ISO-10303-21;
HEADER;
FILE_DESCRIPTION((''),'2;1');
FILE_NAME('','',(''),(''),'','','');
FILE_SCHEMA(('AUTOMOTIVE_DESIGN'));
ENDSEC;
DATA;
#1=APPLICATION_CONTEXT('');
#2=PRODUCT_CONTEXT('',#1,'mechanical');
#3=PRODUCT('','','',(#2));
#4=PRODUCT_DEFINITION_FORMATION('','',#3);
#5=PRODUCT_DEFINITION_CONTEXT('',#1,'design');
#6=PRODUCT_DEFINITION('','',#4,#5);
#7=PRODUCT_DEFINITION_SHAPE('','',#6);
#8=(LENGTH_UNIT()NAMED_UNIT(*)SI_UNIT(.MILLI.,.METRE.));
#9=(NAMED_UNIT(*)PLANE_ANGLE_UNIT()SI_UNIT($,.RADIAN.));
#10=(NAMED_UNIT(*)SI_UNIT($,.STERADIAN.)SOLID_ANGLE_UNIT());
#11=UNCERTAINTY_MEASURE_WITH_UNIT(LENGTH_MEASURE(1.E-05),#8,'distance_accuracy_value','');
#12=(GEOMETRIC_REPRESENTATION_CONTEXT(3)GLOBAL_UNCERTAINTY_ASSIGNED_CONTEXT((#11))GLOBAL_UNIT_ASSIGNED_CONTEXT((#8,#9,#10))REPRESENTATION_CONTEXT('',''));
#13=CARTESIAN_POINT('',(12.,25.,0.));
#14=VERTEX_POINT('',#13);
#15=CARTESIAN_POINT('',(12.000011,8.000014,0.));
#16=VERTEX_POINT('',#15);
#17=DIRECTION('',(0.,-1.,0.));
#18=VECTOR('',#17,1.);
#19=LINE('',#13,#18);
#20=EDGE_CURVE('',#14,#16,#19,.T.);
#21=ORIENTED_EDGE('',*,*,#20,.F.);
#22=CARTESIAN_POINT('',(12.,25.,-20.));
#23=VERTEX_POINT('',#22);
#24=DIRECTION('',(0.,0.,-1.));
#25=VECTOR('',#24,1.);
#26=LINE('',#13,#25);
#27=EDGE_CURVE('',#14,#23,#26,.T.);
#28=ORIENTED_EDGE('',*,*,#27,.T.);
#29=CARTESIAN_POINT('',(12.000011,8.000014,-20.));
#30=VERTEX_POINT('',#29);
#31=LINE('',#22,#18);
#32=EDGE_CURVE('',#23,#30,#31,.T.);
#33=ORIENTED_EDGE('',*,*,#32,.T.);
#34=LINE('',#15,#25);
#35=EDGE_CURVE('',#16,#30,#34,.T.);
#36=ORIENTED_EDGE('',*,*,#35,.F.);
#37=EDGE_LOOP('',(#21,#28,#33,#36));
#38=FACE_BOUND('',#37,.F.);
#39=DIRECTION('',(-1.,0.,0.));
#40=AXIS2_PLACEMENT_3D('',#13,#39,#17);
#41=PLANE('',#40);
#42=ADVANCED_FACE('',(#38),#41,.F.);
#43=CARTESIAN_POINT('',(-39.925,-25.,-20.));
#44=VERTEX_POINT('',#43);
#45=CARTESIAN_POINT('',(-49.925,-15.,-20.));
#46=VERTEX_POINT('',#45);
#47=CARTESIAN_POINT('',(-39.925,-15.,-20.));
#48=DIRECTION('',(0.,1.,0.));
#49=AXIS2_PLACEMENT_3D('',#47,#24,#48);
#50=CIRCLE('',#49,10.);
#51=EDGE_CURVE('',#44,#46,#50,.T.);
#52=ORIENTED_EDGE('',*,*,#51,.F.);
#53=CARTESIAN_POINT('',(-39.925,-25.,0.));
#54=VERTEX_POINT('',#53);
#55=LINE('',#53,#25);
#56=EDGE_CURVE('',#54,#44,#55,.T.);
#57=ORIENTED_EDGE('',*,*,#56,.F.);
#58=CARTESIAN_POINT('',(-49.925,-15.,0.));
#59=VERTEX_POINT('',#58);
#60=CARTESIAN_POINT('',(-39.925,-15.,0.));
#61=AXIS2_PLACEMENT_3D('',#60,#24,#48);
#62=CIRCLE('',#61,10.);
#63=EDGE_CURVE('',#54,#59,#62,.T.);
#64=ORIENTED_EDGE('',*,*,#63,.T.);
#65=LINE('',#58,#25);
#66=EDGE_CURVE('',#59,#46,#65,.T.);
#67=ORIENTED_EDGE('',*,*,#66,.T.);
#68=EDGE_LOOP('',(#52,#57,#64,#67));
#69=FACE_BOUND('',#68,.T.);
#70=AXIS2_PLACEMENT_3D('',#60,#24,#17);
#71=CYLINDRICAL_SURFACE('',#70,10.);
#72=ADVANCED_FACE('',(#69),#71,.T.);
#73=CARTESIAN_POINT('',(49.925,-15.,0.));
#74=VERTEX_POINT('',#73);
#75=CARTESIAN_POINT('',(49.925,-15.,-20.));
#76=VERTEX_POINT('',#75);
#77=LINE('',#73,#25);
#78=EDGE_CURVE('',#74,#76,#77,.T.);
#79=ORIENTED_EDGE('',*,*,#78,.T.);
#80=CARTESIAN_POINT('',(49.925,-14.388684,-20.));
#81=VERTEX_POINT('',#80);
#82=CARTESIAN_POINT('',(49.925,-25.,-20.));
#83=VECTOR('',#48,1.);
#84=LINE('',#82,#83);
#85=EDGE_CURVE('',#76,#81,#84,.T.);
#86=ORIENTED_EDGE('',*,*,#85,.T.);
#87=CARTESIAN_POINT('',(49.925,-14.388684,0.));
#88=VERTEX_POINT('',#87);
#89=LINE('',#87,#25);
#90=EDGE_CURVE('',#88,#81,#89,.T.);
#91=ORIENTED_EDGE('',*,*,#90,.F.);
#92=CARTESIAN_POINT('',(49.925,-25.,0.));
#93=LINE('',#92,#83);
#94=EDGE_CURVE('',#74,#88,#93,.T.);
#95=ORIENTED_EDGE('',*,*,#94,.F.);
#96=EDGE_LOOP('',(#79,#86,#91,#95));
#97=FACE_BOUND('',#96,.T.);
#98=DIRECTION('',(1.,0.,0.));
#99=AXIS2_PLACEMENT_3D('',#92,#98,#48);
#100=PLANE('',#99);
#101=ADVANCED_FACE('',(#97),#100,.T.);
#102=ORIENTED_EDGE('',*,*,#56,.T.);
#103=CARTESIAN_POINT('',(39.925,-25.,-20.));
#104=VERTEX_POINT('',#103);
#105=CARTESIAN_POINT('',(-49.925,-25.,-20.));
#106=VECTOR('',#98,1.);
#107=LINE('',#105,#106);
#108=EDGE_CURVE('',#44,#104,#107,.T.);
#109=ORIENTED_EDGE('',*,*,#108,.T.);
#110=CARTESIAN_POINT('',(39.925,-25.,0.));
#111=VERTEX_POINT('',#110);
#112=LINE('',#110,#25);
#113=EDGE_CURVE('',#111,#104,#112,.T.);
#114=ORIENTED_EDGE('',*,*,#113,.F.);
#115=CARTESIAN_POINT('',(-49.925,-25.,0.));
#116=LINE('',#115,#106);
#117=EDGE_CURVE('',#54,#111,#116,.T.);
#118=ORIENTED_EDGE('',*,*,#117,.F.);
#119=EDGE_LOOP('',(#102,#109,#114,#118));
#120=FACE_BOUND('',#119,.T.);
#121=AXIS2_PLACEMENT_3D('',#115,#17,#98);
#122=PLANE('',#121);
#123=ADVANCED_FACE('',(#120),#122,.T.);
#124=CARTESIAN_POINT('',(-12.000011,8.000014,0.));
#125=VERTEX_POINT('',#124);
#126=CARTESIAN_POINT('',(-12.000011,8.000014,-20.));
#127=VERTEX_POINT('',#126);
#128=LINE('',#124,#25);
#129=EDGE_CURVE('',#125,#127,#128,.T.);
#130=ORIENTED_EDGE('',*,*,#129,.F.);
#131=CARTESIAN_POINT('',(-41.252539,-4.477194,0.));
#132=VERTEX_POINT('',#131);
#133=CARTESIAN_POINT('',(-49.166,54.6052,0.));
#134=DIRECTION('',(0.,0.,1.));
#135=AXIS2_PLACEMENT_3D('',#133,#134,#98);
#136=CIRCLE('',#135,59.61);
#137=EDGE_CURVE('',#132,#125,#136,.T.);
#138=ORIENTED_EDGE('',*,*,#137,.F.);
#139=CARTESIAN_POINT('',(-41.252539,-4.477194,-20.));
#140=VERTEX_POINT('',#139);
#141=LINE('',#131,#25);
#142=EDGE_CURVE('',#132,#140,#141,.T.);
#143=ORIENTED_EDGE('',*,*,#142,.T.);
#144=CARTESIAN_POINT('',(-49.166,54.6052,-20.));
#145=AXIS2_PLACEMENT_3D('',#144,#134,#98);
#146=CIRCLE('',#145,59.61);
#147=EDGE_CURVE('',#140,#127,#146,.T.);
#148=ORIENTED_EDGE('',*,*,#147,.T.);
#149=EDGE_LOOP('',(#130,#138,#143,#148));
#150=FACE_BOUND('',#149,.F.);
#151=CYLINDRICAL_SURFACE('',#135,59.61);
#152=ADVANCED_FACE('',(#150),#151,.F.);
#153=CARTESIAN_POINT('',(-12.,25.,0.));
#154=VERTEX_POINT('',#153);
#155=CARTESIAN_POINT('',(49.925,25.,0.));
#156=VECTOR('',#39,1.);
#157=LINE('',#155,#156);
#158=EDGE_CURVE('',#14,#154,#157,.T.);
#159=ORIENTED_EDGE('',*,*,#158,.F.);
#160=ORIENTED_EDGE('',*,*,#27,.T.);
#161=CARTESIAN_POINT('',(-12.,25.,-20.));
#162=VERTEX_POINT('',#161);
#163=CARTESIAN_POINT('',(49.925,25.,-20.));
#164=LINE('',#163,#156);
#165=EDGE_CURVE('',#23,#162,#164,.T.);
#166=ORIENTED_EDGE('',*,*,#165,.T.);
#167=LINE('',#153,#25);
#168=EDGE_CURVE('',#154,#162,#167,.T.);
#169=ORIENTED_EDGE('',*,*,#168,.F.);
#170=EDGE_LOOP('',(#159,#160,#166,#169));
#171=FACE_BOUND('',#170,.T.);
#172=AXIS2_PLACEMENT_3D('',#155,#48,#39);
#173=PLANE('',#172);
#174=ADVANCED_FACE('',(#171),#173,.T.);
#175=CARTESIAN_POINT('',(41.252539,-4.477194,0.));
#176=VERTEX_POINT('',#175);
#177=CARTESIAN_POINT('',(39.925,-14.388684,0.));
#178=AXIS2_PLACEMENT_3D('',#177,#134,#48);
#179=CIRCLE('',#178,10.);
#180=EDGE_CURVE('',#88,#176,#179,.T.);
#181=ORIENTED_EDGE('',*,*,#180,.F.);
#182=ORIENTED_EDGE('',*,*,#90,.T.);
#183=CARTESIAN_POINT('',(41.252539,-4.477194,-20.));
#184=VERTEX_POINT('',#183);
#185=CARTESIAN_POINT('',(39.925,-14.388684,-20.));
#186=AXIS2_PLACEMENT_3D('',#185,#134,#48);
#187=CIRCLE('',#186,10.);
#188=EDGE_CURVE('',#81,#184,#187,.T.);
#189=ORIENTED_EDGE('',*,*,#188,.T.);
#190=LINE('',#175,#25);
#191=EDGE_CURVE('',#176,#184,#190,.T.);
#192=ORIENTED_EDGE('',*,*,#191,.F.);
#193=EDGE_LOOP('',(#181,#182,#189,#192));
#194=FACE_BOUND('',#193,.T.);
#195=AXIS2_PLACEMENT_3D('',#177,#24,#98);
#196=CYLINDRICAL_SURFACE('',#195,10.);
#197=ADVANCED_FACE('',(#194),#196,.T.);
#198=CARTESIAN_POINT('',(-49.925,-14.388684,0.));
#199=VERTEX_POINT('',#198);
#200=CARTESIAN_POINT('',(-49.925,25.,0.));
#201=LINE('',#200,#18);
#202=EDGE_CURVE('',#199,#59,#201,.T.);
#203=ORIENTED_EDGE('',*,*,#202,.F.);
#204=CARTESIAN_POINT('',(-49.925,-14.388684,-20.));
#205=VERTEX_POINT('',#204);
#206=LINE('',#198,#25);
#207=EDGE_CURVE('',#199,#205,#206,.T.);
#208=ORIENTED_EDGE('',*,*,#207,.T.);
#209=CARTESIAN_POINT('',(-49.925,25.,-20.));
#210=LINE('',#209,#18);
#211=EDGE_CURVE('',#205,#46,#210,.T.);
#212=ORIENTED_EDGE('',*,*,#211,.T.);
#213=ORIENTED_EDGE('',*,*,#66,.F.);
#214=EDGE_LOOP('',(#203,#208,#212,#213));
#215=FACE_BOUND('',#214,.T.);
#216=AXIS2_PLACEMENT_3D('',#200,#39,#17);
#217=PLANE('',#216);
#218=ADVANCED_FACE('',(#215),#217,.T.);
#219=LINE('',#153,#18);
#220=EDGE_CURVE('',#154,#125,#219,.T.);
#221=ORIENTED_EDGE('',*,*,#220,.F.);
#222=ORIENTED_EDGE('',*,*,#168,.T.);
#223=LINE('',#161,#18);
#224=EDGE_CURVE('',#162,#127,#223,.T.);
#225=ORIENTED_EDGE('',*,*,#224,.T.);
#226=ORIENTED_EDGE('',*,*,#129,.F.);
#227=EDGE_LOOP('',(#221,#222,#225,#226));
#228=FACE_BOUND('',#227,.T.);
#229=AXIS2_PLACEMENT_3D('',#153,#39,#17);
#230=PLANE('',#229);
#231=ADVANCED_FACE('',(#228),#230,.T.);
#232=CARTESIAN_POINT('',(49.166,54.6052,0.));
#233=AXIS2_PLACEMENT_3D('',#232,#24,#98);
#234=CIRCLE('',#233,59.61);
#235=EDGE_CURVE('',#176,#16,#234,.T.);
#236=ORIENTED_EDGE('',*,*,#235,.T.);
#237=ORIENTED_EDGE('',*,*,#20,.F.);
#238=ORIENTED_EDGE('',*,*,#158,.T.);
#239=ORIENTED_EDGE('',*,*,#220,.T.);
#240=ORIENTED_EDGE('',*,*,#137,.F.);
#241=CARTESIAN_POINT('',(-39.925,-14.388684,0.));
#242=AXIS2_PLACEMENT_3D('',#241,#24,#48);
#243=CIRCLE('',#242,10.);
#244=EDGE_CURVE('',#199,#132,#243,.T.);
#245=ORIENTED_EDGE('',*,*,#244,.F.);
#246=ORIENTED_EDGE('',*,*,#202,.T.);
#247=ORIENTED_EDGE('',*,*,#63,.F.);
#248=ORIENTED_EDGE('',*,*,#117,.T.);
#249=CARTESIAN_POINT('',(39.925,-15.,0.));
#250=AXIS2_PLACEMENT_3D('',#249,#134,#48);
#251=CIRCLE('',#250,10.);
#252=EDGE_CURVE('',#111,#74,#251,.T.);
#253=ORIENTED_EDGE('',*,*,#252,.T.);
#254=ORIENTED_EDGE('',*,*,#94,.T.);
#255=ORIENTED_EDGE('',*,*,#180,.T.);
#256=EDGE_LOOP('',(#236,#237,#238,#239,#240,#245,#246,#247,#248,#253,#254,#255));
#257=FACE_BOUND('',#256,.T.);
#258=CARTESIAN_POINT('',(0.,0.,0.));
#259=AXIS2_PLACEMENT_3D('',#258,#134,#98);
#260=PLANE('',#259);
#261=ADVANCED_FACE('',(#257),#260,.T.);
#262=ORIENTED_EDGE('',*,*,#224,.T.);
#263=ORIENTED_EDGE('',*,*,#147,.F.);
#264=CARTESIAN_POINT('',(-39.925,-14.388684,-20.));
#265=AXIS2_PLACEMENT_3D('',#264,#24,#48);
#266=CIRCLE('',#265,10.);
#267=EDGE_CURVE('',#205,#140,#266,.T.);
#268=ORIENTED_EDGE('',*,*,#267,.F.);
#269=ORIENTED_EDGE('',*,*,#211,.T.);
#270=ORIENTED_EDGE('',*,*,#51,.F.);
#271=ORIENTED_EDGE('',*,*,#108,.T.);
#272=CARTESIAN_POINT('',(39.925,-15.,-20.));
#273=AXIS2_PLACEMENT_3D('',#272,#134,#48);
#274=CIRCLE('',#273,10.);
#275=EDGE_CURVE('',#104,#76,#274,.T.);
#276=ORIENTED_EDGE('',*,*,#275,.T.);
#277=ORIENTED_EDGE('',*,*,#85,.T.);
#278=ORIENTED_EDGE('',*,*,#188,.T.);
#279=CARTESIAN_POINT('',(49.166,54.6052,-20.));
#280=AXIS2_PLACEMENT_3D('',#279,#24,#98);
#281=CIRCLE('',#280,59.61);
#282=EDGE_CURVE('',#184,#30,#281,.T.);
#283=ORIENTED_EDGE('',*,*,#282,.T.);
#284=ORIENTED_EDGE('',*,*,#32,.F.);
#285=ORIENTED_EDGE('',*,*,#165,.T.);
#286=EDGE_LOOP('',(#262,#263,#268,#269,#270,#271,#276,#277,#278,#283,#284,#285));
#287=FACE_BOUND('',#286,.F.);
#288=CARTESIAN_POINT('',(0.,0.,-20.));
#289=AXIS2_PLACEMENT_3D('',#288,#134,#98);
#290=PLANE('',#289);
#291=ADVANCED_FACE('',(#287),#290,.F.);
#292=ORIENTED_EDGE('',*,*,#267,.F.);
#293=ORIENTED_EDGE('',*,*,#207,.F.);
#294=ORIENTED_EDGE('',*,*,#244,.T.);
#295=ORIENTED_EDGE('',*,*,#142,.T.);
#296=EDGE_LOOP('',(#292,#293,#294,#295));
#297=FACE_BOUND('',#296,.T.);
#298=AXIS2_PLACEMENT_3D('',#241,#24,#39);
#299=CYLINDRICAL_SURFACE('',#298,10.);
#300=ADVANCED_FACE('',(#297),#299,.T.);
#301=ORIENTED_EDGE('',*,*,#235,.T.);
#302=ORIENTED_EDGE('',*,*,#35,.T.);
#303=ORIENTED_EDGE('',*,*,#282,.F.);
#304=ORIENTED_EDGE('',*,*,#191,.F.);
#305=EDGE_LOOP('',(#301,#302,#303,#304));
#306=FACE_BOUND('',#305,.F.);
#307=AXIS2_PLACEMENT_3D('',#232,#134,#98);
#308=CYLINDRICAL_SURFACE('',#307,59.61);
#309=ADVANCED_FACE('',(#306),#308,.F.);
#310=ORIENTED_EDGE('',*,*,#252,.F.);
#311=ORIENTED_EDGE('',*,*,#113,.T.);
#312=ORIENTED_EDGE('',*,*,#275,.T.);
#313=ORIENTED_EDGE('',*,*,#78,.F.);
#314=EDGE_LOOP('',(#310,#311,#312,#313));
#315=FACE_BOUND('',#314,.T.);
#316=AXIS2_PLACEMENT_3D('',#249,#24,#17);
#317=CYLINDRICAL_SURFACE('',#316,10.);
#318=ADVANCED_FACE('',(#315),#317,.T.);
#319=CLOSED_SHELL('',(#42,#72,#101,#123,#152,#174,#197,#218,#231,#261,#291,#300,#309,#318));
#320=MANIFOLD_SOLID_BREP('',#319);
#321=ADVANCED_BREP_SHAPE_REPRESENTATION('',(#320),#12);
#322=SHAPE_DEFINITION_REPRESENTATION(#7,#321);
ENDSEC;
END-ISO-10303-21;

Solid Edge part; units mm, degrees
sketch "Sketch1" plane through (0, 0, 0) normal (0, 0, 1) x (1, 0, 0)
  line L0 (-49.925, -25) -> (49.925, -25)
  line L1 (49.925, -25) -> (49.925, 25)
  line L2 (49.925, 25) -> (-49.925, 25)
  line L3 (-49.925, 25) -> (-49.925, -25)
extrude "Protrusion1" add sketch "Sketch1" against normal blind 20
sketch "Sketch2" plane through (0, 0, 0) normal (0, 0, 1) x (1, 0, 0)
  line L0 (-49.925, 25) -> (-12, 25)
  line L1 (-12, 25) -> (-12, 8)
  line L2 (-12, 8) -> (-49.925, 8)
  line L3 (-49.925, 8) -> (-49.925, 25)
  line L4 (49.925, 25) -> (12, 25)
  line L5 (12, 25) -> (12, 8)
  line L6 (12, 8) -> (49.925, 8)
  line L7 (49.925, 8) -> (49.925, 25)
extrude "ExtrudedCutout_1" cut sketch "Sketch2" against normal blind 20
sketch "Sketch3" plane through (0, 0, 0) normal (0, 0, 1) x (1, 0, 0)
  arc A0 (-49.925, -5) -> (-12, 8) centre (-49.166, 54.6052) ccw
  line L0 (-49.925, 8) -> (-12, 8)
  line L1 (-49.925, -5) -> (-49.925, 8)
  arc A1 (49.925, -5) -> (12, 8) centre (49.166, 54.6052) cw
  line L2 (12, 8) -> (49.925, 8)
  line L3 (49.925, 8) -> (49.925, -5)
extrude "ExtrudedCutout_2" cut sketch "Sketch3" against normal blind 20
fillet "Round_1" radius 10 4 edges at (49.925, -25, -10) (49.925, -5, -10) (-49.925, -25, -10) (-49.925, -5, -10)
